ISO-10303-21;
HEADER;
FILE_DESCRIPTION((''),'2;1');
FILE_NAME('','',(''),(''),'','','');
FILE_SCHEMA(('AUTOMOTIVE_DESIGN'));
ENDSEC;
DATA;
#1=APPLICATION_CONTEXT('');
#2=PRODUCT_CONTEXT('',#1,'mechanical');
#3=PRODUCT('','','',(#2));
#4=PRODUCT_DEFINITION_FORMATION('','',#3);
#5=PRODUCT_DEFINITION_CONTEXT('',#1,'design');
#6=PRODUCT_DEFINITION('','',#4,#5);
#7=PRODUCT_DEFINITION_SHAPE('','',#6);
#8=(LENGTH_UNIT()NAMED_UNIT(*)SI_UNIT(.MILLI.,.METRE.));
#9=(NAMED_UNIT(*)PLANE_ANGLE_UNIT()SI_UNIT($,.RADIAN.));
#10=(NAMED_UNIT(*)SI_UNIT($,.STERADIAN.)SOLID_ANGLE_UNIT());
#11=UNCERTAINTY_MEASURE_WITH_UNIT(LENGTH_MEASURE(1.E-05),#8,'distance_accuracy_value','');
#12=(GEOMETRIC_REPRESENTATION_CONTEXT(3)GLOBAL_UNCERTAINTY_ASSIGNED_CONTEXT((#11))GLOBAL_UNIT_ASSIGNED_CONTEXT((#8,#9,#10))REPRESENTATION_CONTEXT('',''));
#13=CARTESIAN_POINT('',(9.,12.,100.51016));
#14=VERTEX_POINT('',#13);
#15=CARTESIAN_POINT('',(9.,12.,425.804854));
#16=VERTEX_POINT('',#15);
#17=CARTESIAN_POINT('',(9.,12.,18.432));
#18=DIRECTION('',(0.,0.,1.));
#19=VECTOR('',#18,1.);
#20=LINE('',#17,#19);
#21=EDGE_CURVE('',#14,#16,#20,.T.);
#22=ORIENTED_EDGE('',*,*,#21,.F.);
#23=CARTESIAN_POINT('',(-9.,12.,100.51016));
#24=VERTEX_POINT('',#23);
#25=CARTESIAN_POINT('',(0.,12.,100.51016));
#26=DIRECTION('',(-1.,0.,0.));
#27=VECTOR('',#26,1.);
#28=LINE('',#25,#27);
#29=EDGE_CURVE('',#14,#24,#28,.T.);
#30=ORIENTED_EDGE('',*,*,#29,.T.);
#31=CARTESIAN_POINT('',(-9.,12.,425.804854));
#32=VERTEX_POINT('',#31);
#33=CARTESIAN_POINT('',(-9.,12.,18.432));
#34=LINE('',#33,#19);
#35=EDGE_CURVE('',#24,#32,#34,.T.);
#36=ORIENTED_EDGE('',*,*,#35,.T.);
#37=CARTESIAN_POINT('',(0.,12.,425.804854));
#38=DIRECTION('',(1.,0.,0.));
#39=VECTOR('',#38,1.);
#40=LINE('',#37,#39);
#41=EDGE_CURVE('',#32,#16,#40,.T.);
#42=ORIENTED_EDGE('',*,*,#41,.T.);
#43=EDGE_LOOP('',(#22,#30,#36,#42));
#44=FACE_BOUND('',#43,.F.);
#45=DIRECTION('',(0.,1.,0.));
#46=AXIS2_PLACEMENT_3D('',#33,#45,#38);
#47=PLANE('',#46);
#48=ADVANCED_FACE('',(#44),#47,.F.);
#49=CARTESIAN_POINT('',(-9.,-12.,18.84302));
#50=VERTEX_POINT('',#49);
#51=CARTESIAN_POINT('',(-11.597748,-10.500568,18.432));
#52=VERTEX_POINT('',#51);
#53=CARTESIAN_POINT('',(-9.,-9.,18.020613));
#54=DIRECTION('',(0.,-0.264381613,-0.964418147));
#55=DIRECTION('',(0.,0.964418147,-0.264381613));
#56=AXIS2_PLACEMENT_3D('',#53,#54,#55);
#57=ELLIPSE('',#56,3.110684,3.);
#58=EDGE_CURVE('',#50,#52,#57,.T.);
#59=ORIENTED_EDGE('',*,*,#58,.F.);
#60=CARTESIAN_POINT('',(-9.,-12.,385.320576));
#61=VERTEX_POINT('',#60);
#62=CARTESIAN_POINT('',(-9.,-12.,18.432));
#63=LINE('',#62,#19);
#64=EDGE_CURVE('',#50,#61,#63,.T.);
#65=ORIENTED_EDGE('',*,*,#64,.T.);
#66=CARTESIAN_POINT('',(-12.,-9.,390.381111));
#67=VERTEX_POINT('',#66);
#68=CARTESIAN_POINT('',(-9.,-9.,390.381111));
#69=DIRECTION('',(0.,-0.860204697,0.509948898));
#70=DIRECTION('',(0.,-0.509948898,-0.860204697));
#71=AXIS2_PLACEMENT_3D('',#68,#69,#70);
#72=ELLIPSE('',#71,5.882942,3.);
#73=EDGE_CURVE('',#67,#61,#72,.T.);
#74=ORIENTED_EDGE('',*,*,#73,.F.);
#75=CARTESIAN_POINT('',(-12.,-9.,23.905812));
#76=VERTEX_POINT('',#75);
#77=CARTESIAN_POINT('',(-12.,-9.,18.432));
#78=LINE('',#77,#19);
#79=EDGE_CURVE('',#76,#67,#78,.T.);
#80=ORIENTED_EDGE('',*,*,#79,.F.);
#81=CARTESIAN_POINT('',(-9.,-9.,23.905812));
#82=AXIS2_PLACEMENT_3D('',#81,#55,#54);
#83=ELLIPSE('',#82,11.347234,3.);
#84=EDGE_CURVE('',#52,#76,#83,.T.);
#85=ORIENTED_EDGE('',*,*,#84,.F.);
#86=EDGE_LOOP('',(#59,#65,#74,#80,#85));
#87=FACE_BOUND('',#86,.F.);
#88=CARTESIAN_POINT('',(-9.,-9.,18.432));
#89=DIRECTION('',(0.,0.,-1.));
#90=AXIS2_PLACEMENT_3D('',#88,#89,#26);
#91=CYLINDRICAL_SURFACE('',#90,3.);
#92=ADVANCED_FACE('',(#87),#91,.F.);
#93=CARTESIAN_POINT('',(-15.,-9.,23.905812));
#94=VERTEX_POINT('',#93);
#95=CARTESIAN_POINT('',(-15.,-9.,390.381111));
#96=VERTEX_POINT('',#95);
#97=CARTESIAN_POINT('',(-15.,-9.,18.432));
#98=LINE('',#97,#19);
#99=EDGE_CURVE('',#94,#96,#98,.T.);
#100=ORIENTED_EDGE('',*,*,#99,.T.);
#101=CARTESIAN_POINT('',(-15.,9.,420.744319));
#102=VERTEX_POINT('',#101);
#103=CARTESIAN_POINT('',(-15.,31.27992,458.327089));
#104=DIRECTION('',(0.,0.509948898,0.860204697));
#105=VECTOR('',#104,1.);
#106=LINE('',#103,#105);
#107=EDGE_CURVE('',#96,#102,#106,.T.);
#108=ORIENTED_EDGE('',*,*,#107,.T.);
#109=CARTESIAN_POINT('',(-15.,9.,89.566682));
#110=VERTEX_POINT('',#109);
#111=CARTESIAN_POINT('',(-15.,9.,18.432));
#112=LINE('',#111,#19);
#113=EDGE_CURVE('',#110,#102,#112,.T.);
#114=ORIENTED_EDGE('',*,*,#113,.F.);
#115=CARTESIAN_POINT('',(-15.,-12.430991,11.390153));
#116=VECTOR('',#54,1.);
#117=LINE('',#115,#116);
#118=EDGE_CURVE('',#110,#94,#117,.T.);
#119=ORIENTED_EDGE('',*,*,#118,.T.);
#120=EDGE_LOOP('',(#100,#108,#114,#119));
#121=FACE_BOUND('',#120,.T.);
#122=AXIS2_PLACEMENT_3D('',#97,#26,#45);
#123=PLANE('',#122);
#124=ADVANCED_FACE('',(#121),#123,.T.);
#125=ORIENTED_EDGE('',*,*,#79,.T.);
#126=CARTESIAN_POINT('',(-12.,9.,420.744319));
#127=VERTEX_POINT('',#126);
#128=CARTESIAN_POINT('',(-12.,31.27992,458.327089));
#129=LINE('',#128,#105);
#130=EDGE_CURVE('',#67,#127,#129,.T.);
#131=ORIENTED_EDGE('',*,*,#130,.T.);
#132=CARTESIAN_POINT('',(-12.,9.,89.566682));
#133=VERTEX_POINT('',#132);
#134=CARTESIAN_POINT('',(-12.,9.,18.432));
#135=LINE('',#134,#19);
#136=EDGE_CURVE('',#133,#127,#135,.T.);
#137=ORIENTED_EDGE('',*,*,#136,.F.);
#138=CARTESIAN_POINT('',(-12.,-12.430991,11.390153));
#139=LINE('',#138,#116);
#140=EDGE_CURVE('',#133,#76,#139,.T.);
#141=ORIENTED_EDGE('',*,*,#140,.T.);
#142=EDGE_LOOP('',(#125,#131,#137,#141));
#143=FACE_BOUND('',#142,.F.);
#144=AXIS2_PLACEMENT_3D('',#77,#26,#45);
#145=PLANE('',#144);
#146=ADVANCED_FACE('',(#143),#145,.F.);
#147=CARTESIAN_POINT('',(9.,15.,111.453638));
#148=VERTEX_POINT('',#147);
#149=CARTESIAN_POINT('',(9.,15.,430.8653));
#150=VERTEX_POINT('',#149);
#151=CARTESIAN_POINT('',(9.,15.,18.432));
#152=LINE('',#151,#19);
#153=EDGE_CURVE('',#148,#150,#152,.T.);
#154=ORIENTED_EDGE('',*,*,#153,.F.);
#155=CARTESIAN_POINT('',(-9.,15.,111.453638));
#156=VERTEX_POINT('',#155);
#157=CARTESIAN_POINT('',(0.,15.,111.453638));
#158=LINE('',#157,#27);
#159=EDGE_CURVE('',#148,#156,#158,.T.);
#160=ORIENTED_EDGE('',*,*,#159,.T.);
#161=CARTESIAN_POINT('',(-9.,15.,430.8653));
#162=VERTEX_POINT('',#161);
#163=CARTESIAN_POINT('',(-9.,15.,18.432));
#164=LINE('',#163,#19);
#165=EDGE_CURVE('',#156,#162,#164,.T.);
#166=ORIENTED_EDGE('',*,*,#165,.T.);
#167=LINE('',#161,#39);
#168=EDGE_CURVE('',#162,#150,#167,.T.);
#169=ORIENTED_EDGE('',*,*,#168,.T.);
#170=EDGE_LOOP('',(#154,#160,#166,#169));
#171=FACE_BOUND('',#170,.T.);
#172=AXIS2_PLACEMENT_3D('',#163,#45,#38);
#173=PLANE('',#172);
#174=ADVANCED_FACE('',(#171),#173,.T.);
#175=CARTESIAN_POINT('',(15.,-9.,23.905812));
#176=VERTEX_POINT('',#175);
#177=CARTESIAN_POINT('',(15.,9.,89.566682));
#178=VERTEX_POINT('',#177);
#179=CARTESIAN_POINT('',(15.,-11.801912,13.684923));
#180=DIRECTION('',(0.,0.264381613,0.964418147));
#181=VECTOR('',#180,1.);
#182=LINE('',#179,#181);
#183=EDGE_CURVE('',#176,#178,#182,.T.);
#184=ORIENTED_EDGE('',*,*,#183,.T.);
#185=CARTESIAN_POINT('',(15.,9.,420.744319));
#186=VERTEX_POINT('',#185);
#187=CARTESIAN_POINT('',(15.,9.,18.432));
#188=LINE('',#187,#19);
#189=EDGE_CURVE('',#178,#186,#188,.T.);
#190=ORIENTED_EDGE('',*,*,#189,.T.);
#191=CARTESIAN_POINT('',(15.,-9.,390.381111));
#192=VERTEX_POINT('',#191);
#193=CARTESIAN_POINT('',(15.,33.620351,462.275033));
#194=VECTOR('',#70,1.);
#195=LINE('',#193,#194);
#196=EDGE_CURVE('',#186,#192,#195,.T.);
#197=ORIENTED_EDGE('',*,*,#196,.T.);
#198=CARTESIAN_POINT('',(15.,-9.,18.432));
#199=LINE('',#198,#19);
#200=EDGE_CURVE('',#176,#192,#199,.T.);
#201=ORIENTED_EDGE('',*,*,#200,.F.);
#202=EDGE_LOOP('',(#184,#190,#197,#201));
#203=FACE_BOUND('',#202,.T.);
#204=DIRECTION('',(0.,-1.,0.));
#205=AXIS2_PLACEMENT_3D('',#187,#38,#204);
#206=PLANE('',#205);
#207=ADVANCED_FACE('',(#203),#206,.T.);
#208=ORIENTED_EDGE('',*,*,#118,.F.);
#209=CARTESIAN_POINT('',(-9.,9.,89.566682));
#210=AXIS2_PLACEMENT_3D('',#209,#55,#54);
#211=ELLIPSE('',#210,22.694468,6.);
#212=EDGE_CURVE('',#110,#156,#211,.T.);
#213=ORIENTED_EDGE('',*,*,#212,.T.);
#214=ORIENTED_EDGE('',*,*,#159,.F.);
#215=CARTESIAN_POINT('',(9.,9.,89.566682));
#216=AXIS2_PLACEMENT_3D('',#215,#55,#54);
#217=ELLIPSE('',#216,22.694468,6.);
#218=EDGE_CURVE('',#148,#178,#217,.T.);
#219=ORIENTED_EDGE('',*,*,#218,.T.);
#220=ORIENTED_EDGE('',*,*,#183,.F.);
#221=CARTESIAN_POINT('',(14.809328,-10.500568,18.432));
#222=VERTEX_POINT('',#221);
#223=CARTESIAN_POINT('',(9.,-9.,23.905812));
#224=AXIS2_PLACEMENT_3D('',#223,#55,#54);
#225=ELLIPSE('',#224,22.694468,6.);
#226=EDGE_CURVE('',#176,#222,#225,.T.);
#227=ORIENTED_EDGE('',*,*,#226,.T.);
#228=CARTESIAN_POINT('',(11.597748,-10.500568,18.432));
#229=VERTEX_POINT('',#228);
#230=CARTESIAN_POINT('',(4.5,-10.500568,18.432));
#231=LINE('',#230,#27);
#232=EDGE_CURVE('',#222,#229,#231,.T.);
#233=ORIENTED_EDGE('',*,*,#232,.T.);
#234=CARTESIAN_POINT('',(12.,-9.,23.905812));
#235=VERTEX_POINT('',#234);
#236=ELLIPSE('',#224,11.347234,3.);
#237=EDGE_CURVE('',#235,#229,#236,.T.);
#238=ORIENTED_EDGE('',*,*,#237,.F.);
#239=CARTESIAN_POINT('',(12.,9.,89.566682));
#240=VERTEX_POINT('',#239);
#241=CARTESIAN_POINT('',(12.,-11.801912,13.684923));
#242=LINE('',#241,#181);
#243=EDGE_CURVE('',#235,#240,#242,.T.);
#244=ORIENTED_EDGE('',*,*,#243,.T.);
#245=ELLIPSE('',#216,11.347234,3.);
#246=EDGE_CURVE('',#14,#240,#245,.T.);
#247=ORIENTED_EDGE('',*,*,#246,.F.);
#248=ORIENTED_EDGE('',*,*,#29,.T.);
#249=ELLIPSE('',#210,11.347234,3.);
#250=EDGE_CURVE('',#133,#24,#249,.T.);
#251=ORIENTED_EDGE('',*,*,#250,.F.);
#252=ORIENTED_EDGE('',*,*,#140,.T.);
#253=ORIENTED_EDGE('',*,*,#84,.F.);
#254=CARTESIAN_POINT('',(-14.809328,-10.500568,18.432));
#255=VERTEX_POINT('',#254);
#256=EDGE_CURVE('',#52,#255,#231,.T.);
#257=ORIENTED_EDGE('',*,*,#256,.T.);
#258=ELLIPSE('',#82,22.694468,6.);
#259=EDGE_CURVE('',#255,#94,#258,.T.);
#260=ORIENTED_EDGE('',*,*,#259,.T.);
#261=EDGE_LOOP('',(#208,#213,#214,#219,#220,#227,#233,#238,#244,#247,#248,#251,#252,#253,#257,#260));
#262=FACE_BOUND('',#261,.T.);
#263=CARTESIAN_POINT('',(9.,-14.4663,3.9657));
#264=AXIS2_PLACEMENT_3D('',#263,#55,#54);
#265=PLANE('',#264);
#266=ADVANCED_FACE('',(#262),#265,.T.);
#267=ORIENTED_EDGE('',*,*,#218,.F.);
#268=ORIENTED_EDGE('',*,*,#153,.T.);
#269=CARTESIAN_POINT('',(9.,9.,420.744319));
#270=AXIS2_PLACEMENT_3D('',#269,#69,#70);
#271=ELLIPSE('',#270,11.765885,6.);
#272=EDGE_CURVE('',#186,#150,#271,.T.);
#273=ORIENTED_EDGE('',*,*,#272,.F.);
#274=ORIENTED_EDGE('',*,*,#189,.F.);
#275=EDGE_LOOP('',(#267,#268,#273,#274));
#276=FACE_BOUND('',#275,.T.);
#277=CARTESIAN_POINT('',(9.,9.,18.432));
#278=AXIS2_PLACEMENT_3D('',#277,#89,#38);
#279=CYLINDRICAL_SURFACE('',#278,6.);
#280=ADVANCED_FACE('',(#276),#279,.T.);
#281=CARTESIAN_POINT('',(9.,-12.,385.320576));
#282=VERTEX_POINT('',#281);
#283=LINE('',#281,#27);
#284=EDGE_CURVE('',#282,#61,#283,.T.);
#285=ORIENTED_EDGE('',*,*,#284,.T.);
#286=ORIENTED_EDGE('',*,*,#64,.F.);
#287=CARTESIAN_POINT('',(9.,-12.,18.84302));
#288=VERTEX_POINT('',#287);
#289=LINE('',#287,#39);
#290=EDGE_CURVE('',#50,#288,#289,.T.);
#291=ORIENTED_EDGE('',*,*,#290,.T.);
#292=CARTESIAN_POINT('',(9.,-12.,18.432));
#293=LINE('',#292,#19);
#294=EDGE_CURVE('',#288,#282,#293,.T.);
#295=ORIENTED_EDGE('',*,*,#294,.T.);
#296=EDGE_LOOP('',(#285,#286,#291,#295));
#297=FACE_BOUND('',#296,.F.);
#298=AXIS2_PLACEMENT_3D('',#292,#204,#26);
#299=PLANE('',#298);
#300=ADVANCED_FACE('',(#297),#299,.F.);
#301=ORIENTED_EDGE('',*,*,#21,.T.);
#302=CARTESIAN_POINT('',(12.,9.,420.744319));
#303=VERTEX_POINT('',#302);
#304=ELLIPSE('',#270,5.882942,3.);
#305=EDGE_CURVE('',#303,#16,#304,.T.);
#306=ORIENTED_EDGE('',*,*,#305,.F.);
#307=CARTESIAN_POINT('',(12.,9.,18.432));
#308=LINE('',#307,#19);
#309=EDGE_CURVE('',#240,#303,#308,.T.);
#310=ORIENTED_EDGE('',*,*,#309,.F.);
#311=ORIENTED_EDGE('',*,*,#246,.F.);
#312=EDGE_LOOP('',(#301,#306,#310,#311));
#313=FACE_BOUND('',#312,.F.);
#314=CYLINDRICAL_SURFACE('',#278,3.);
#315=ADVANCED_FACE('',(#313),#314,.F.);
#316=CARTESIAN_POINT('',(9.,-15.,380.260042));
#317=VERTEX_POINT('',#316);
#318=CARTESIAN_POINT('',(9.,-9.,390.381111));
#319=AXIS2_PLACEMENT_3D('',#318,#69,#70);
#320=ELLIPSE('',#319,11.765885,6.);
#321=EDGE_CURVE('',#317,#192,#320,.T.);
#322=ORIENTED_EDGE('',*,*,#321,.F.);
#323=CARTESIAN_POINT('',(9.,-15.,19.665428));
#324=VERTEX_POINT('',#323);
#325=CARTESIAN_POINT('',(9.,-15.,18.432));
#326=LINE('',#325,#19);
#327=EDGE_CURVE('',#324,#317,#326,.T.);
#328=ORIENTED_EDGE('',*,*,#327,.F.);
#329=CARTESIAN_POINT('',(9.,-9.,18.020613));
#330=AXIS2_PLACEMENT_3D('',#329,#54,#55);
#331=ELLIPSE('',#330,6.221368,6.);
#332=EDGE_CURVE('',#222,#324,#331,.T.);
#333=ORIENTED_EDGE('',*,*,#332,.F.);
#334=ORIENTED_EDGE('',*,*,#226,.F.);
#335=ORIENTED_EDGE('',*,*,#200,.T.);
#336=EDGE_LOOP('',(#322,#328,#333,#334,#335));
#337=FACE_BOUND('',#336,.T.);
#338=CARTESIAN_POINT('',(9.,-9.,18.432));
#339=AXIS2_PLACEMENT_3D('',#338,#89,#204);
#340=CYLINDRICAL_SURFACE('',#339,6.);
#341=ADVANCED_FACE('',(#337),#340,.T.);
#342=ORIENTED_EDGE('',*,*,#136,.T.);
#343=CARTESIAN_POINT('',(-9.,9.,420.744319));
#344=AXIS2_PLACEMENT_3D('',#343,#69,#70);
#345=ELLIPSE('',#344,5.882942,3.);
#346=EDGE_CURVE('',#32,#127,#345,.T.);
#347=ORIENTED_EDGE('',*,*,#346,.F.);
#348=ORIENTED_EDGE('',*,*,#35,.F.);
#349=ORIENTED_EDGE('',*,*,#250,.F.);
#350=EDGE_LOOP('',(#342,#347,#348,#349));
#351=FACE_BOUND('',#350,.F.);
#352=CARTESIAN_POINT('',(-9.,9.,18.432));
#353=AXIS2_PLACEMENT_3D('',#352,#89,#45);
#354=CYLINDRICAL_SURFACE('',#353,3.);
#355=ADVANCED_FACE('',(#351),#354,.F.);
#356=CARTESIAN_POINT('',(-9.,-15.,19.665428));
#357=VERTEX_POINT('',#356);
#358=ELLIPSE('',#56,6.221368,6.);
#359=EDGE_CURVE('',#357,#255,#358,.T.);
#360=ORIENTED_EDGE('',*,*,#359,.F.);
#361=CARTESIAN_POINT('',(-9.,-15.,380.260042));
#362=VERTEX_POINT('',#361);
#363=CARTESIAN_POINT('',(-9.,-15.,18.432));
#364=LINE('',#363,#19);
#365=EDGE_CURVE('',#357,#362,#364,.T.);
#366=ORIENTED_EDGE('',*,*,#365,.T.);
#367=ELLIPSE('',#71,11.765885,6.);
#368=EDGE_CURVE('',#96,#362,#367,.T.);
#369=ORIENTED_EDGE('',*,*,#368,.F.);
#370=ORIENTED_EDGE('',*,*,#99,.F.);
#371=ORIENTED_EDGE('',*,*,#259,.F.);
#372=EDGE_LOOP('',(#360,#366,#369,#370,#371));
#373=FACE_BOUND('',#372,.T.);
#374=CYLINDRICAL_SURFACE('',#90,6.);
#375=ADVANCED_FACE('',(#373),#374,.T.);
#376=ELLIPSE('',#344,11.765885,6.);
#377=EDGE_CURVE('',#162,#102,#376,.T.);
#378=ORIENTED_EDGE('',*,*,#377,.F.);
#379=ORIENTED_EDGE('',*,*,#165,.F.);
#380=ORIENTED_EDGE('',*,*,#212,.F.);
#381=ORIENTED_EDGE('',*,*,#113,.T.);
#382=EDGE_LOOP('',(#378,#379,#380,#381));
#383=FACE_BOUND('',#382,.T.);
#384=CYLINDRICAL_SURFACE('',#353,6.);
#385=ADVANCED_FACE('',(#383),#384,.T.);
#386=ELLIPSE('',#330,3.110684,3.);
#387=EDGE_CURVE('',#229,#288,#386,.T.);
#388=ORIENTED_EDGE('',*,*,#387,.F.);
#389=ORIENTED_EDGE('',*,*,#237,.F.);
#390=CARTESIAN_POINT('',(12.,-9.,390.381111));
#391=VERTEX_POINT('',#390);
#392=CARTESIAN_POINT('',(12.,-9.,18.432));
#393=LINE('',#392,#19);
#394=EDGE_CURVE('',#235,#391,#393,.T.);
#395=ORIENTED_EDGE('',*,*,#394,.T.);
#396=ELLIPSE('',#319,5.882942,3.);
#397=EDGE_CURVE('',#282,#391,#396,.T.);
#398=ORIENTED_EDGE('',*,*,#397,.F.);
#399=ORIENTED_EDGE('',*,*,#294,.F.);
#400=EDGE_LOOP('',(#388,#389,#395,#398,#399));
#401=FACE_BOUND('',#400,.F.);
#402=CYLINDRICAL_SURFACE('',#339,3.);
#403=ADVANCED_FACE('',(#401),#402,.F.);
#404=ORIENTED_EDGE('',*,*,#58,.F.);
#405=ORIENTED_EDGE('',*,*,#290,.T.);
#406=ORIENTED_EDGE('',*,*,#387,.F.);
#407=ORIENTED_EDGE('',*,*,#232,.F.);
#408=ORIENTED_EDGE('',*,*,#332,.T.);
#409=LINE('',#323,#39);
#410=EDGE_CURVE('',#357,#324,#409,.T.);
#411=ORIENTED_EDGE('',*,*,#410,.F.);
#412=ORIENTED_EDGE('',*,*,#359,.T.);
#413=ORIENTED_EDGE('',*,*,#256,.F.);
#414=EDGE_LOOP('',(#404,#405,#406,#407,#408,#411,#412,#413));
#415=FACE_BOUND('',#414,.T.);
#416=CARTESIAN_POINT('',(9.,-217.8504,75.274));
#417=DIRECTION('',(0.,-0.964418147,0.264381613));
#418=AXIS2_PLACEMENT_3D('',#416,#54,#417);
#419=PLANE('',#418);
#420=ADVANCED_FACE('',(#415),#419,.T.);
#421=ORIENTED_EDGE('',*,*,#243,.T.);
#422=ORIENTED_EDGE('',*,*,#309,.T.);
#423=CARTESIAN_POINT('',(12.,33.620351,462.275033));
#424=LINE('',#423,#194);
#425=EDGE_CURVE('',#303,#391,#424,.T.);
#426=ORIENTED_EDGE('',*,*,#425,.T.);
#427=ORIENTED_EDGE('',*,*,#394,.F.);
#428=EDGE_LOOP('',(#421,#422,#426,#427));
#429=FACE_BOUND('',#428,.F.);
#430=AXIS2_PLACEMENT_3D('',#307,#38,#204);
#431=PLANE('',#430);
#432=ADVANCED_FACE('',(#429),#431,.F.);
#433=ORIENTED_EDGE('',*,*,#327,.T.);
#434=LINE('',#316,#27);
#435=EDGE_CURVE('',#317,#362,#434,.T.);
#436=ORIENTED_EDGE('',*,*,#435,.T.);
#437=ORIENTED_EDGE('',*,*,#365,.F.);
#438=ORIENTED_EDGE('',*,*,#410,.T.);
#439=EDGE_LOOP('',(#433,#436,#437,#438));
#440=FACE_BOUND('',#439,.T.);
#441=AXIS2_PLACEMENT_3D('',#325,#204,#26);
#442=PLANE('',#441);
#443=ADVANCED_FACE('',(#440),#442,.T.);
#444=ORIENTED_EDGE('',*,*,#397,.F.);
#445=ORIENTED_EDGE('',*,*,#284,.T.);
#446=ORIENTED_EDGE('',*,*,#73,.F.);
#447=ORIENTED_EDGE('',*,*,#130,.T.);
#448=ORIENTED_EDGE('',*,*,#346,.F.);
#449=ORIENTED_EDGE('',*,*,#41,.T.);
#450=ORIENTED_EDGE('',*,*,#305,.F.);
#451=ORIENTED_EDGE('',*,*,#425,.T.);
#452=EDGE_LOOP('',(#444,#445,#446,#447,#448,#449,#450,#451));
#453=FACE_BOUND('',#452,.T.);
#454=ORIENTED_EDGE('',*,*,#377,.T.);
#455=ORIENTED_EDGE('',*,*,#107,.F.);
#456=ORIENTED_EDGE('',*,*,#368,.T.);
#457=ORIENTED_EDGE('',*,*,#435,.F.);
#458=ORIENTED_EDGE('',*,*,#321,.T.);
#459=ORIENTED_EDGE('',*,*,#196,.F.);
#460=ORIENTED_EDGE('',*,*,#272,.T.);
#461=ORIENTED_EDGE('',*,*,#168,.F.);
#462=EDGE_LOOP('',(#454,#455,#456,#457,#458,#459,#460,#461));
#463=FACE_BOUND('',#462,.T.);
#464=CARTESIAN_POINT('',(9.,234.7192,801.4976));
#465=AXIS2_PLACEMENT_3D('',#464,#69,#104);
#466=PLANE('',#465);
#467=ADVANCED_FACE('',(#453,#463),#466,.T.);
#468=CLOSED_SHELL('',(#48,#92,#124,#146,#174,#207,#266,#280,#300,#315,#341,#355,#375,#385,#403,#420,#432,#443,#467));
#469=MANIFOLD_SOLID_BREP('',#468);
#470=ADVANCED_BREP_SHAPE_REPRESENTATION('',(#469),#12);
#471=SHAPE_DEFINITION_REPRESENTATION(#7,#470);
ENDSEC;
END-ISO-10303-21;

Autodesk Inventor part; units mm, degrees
ref_plane "Start Plane" through (0, 0, 18.432) normal (0, 0, 1) x (1, 0, 0)
ref_plane "End Plane" through (0, 0, 430.8653) normal (0, 0, 1) x (1, 0, 0)
sketch "Sketch" plane through (0, 0, 0) normal (0, 0, 1) x (1, 0, 0)
  line L0 (-15, -9) -> (-15, 9)
  line L1 (-9, 15) -> (9, 15)
  line L2 (15, 9) -> (15, -9)
  line L3 (9, -15) -> (-9, -15)
  arc A0 (-15, -9) -> (-9, -15) centre (-9, -9) ccw
  arc A1 (-9, 15) -> (-15, 9) centre (-9, 9) ccw
  arc A2 (15, 9) -> (9, 15) centre (9, 9) ccw
  arc A3 (9, -15) -> (15, -9) centre (9, -9) ccw
  arc A4 (-9, 12) -> (-12, 9) centre (-9, 9) ccw
  line L4 (-9, 12) -> (9, 12)
  arc A5 (12, 9) -> (9, 12) centre (9, 9) ccw
  line L5 (12, 9) -> (12, -9)
  arc A6 (9, -12) -> (12, -9) centre (9, -9) ccw
  line L6 (9, -12) -> (-9, -12)
  arc A7 (-12, -9) -> (-9, -12) centre (-9, -9) ccw
  line L7 (-12, -9) -> (-12, 9)
  line L8 (0, 22.7397) -> (0, -22.7397) construction
  line L9 (-22.7397, 0) -> (22.7397, 0) construction
  dimension "d7" = 6
  dimension "d10" = 30
  dimension "d11" = 30
  dimension "d12" = 3
  dimension "d15" = 15
  dimension "d16" = 15
extrude "Body" add sketch "Sketch" along normal up to surface (412.4333 mm away) from surface at 18.432
sketch "Sketch3" plane through (0, 0, 0) normal (0, 0, 1) x (1, 0, 0)
  line L0 (0, 0) -> (10, 0)
ref_plane "Work Plane3" through (0, 0, 0) normal (0, -1, 0) x (1, 0, 0)
ref_plane "Work Plane4" through (9, -14.4663, 3.9657) normal (0, 0.9644181, -0.2643816) x (1, 0, 0)
split "Split1" plane through (9, -14.4663, 3.9657) removes the side toward (0, 0.9644181, -0.2643816)
ref_plane "Work Plane5" through (9, -217.8504, 75.274) normal (0, -0.2643816, -0.9644181) x (1, 0, 0)
split "Split2" plane through (9, -217.8504, 75.274) removes the side toward (0, -0.2643816, -0.9644181)
ref_plane "Work Plane6" through (9, 234.7192, 801.4976) normal (0, -0.8602047, 0.5099489) x (1, 0, 0)
split "Split3" plane through (9, 234.7192, 801.4976) removes the side toward (0, -0.8602047, 0.5099489)
sketch "Sketch4" plane through (0, 0, 0) normal (0, -1, 0) x (1, 0, 0)
  line L0 (-2, 18.432) -> (12, 18.432) projected
  line L1 (-2, 430.8653) -> (12, 430.8653) projected
  dimension "d18" = 412.4333
equation "\"d7\" = G_IR"
equation "\"d10\" = G_H"
equation "\"d11\" = G_W"
equation "\"d12\" = G_T"
equation "\"d15\" = 0.5 * d10"
equation "\"d16\" = 0.5 * d11"
equation "\"d3\" = G_L"
equation "\"G_W\" = 30"
equation "\"G_H\" = 30"
equation "\"G_T\" = 3"
equation "\"G_IR\" = 6"
equation "\"G_L\" = d18"
equation "\"G_OFFSET_START\" = -18.432"
equation "\"G_OFFSET_END\" = -4.11204"
equation "\"d13\" = -G_OFFSET_START"
equation "\"d14\" = G_OFFSET_END + B_L"
equation "\"B_L\" = 434.9773"
properties part number "DIN EN 10219-2 - 30 x 30 x 3  - 412.43" material "Steel, Mild"
